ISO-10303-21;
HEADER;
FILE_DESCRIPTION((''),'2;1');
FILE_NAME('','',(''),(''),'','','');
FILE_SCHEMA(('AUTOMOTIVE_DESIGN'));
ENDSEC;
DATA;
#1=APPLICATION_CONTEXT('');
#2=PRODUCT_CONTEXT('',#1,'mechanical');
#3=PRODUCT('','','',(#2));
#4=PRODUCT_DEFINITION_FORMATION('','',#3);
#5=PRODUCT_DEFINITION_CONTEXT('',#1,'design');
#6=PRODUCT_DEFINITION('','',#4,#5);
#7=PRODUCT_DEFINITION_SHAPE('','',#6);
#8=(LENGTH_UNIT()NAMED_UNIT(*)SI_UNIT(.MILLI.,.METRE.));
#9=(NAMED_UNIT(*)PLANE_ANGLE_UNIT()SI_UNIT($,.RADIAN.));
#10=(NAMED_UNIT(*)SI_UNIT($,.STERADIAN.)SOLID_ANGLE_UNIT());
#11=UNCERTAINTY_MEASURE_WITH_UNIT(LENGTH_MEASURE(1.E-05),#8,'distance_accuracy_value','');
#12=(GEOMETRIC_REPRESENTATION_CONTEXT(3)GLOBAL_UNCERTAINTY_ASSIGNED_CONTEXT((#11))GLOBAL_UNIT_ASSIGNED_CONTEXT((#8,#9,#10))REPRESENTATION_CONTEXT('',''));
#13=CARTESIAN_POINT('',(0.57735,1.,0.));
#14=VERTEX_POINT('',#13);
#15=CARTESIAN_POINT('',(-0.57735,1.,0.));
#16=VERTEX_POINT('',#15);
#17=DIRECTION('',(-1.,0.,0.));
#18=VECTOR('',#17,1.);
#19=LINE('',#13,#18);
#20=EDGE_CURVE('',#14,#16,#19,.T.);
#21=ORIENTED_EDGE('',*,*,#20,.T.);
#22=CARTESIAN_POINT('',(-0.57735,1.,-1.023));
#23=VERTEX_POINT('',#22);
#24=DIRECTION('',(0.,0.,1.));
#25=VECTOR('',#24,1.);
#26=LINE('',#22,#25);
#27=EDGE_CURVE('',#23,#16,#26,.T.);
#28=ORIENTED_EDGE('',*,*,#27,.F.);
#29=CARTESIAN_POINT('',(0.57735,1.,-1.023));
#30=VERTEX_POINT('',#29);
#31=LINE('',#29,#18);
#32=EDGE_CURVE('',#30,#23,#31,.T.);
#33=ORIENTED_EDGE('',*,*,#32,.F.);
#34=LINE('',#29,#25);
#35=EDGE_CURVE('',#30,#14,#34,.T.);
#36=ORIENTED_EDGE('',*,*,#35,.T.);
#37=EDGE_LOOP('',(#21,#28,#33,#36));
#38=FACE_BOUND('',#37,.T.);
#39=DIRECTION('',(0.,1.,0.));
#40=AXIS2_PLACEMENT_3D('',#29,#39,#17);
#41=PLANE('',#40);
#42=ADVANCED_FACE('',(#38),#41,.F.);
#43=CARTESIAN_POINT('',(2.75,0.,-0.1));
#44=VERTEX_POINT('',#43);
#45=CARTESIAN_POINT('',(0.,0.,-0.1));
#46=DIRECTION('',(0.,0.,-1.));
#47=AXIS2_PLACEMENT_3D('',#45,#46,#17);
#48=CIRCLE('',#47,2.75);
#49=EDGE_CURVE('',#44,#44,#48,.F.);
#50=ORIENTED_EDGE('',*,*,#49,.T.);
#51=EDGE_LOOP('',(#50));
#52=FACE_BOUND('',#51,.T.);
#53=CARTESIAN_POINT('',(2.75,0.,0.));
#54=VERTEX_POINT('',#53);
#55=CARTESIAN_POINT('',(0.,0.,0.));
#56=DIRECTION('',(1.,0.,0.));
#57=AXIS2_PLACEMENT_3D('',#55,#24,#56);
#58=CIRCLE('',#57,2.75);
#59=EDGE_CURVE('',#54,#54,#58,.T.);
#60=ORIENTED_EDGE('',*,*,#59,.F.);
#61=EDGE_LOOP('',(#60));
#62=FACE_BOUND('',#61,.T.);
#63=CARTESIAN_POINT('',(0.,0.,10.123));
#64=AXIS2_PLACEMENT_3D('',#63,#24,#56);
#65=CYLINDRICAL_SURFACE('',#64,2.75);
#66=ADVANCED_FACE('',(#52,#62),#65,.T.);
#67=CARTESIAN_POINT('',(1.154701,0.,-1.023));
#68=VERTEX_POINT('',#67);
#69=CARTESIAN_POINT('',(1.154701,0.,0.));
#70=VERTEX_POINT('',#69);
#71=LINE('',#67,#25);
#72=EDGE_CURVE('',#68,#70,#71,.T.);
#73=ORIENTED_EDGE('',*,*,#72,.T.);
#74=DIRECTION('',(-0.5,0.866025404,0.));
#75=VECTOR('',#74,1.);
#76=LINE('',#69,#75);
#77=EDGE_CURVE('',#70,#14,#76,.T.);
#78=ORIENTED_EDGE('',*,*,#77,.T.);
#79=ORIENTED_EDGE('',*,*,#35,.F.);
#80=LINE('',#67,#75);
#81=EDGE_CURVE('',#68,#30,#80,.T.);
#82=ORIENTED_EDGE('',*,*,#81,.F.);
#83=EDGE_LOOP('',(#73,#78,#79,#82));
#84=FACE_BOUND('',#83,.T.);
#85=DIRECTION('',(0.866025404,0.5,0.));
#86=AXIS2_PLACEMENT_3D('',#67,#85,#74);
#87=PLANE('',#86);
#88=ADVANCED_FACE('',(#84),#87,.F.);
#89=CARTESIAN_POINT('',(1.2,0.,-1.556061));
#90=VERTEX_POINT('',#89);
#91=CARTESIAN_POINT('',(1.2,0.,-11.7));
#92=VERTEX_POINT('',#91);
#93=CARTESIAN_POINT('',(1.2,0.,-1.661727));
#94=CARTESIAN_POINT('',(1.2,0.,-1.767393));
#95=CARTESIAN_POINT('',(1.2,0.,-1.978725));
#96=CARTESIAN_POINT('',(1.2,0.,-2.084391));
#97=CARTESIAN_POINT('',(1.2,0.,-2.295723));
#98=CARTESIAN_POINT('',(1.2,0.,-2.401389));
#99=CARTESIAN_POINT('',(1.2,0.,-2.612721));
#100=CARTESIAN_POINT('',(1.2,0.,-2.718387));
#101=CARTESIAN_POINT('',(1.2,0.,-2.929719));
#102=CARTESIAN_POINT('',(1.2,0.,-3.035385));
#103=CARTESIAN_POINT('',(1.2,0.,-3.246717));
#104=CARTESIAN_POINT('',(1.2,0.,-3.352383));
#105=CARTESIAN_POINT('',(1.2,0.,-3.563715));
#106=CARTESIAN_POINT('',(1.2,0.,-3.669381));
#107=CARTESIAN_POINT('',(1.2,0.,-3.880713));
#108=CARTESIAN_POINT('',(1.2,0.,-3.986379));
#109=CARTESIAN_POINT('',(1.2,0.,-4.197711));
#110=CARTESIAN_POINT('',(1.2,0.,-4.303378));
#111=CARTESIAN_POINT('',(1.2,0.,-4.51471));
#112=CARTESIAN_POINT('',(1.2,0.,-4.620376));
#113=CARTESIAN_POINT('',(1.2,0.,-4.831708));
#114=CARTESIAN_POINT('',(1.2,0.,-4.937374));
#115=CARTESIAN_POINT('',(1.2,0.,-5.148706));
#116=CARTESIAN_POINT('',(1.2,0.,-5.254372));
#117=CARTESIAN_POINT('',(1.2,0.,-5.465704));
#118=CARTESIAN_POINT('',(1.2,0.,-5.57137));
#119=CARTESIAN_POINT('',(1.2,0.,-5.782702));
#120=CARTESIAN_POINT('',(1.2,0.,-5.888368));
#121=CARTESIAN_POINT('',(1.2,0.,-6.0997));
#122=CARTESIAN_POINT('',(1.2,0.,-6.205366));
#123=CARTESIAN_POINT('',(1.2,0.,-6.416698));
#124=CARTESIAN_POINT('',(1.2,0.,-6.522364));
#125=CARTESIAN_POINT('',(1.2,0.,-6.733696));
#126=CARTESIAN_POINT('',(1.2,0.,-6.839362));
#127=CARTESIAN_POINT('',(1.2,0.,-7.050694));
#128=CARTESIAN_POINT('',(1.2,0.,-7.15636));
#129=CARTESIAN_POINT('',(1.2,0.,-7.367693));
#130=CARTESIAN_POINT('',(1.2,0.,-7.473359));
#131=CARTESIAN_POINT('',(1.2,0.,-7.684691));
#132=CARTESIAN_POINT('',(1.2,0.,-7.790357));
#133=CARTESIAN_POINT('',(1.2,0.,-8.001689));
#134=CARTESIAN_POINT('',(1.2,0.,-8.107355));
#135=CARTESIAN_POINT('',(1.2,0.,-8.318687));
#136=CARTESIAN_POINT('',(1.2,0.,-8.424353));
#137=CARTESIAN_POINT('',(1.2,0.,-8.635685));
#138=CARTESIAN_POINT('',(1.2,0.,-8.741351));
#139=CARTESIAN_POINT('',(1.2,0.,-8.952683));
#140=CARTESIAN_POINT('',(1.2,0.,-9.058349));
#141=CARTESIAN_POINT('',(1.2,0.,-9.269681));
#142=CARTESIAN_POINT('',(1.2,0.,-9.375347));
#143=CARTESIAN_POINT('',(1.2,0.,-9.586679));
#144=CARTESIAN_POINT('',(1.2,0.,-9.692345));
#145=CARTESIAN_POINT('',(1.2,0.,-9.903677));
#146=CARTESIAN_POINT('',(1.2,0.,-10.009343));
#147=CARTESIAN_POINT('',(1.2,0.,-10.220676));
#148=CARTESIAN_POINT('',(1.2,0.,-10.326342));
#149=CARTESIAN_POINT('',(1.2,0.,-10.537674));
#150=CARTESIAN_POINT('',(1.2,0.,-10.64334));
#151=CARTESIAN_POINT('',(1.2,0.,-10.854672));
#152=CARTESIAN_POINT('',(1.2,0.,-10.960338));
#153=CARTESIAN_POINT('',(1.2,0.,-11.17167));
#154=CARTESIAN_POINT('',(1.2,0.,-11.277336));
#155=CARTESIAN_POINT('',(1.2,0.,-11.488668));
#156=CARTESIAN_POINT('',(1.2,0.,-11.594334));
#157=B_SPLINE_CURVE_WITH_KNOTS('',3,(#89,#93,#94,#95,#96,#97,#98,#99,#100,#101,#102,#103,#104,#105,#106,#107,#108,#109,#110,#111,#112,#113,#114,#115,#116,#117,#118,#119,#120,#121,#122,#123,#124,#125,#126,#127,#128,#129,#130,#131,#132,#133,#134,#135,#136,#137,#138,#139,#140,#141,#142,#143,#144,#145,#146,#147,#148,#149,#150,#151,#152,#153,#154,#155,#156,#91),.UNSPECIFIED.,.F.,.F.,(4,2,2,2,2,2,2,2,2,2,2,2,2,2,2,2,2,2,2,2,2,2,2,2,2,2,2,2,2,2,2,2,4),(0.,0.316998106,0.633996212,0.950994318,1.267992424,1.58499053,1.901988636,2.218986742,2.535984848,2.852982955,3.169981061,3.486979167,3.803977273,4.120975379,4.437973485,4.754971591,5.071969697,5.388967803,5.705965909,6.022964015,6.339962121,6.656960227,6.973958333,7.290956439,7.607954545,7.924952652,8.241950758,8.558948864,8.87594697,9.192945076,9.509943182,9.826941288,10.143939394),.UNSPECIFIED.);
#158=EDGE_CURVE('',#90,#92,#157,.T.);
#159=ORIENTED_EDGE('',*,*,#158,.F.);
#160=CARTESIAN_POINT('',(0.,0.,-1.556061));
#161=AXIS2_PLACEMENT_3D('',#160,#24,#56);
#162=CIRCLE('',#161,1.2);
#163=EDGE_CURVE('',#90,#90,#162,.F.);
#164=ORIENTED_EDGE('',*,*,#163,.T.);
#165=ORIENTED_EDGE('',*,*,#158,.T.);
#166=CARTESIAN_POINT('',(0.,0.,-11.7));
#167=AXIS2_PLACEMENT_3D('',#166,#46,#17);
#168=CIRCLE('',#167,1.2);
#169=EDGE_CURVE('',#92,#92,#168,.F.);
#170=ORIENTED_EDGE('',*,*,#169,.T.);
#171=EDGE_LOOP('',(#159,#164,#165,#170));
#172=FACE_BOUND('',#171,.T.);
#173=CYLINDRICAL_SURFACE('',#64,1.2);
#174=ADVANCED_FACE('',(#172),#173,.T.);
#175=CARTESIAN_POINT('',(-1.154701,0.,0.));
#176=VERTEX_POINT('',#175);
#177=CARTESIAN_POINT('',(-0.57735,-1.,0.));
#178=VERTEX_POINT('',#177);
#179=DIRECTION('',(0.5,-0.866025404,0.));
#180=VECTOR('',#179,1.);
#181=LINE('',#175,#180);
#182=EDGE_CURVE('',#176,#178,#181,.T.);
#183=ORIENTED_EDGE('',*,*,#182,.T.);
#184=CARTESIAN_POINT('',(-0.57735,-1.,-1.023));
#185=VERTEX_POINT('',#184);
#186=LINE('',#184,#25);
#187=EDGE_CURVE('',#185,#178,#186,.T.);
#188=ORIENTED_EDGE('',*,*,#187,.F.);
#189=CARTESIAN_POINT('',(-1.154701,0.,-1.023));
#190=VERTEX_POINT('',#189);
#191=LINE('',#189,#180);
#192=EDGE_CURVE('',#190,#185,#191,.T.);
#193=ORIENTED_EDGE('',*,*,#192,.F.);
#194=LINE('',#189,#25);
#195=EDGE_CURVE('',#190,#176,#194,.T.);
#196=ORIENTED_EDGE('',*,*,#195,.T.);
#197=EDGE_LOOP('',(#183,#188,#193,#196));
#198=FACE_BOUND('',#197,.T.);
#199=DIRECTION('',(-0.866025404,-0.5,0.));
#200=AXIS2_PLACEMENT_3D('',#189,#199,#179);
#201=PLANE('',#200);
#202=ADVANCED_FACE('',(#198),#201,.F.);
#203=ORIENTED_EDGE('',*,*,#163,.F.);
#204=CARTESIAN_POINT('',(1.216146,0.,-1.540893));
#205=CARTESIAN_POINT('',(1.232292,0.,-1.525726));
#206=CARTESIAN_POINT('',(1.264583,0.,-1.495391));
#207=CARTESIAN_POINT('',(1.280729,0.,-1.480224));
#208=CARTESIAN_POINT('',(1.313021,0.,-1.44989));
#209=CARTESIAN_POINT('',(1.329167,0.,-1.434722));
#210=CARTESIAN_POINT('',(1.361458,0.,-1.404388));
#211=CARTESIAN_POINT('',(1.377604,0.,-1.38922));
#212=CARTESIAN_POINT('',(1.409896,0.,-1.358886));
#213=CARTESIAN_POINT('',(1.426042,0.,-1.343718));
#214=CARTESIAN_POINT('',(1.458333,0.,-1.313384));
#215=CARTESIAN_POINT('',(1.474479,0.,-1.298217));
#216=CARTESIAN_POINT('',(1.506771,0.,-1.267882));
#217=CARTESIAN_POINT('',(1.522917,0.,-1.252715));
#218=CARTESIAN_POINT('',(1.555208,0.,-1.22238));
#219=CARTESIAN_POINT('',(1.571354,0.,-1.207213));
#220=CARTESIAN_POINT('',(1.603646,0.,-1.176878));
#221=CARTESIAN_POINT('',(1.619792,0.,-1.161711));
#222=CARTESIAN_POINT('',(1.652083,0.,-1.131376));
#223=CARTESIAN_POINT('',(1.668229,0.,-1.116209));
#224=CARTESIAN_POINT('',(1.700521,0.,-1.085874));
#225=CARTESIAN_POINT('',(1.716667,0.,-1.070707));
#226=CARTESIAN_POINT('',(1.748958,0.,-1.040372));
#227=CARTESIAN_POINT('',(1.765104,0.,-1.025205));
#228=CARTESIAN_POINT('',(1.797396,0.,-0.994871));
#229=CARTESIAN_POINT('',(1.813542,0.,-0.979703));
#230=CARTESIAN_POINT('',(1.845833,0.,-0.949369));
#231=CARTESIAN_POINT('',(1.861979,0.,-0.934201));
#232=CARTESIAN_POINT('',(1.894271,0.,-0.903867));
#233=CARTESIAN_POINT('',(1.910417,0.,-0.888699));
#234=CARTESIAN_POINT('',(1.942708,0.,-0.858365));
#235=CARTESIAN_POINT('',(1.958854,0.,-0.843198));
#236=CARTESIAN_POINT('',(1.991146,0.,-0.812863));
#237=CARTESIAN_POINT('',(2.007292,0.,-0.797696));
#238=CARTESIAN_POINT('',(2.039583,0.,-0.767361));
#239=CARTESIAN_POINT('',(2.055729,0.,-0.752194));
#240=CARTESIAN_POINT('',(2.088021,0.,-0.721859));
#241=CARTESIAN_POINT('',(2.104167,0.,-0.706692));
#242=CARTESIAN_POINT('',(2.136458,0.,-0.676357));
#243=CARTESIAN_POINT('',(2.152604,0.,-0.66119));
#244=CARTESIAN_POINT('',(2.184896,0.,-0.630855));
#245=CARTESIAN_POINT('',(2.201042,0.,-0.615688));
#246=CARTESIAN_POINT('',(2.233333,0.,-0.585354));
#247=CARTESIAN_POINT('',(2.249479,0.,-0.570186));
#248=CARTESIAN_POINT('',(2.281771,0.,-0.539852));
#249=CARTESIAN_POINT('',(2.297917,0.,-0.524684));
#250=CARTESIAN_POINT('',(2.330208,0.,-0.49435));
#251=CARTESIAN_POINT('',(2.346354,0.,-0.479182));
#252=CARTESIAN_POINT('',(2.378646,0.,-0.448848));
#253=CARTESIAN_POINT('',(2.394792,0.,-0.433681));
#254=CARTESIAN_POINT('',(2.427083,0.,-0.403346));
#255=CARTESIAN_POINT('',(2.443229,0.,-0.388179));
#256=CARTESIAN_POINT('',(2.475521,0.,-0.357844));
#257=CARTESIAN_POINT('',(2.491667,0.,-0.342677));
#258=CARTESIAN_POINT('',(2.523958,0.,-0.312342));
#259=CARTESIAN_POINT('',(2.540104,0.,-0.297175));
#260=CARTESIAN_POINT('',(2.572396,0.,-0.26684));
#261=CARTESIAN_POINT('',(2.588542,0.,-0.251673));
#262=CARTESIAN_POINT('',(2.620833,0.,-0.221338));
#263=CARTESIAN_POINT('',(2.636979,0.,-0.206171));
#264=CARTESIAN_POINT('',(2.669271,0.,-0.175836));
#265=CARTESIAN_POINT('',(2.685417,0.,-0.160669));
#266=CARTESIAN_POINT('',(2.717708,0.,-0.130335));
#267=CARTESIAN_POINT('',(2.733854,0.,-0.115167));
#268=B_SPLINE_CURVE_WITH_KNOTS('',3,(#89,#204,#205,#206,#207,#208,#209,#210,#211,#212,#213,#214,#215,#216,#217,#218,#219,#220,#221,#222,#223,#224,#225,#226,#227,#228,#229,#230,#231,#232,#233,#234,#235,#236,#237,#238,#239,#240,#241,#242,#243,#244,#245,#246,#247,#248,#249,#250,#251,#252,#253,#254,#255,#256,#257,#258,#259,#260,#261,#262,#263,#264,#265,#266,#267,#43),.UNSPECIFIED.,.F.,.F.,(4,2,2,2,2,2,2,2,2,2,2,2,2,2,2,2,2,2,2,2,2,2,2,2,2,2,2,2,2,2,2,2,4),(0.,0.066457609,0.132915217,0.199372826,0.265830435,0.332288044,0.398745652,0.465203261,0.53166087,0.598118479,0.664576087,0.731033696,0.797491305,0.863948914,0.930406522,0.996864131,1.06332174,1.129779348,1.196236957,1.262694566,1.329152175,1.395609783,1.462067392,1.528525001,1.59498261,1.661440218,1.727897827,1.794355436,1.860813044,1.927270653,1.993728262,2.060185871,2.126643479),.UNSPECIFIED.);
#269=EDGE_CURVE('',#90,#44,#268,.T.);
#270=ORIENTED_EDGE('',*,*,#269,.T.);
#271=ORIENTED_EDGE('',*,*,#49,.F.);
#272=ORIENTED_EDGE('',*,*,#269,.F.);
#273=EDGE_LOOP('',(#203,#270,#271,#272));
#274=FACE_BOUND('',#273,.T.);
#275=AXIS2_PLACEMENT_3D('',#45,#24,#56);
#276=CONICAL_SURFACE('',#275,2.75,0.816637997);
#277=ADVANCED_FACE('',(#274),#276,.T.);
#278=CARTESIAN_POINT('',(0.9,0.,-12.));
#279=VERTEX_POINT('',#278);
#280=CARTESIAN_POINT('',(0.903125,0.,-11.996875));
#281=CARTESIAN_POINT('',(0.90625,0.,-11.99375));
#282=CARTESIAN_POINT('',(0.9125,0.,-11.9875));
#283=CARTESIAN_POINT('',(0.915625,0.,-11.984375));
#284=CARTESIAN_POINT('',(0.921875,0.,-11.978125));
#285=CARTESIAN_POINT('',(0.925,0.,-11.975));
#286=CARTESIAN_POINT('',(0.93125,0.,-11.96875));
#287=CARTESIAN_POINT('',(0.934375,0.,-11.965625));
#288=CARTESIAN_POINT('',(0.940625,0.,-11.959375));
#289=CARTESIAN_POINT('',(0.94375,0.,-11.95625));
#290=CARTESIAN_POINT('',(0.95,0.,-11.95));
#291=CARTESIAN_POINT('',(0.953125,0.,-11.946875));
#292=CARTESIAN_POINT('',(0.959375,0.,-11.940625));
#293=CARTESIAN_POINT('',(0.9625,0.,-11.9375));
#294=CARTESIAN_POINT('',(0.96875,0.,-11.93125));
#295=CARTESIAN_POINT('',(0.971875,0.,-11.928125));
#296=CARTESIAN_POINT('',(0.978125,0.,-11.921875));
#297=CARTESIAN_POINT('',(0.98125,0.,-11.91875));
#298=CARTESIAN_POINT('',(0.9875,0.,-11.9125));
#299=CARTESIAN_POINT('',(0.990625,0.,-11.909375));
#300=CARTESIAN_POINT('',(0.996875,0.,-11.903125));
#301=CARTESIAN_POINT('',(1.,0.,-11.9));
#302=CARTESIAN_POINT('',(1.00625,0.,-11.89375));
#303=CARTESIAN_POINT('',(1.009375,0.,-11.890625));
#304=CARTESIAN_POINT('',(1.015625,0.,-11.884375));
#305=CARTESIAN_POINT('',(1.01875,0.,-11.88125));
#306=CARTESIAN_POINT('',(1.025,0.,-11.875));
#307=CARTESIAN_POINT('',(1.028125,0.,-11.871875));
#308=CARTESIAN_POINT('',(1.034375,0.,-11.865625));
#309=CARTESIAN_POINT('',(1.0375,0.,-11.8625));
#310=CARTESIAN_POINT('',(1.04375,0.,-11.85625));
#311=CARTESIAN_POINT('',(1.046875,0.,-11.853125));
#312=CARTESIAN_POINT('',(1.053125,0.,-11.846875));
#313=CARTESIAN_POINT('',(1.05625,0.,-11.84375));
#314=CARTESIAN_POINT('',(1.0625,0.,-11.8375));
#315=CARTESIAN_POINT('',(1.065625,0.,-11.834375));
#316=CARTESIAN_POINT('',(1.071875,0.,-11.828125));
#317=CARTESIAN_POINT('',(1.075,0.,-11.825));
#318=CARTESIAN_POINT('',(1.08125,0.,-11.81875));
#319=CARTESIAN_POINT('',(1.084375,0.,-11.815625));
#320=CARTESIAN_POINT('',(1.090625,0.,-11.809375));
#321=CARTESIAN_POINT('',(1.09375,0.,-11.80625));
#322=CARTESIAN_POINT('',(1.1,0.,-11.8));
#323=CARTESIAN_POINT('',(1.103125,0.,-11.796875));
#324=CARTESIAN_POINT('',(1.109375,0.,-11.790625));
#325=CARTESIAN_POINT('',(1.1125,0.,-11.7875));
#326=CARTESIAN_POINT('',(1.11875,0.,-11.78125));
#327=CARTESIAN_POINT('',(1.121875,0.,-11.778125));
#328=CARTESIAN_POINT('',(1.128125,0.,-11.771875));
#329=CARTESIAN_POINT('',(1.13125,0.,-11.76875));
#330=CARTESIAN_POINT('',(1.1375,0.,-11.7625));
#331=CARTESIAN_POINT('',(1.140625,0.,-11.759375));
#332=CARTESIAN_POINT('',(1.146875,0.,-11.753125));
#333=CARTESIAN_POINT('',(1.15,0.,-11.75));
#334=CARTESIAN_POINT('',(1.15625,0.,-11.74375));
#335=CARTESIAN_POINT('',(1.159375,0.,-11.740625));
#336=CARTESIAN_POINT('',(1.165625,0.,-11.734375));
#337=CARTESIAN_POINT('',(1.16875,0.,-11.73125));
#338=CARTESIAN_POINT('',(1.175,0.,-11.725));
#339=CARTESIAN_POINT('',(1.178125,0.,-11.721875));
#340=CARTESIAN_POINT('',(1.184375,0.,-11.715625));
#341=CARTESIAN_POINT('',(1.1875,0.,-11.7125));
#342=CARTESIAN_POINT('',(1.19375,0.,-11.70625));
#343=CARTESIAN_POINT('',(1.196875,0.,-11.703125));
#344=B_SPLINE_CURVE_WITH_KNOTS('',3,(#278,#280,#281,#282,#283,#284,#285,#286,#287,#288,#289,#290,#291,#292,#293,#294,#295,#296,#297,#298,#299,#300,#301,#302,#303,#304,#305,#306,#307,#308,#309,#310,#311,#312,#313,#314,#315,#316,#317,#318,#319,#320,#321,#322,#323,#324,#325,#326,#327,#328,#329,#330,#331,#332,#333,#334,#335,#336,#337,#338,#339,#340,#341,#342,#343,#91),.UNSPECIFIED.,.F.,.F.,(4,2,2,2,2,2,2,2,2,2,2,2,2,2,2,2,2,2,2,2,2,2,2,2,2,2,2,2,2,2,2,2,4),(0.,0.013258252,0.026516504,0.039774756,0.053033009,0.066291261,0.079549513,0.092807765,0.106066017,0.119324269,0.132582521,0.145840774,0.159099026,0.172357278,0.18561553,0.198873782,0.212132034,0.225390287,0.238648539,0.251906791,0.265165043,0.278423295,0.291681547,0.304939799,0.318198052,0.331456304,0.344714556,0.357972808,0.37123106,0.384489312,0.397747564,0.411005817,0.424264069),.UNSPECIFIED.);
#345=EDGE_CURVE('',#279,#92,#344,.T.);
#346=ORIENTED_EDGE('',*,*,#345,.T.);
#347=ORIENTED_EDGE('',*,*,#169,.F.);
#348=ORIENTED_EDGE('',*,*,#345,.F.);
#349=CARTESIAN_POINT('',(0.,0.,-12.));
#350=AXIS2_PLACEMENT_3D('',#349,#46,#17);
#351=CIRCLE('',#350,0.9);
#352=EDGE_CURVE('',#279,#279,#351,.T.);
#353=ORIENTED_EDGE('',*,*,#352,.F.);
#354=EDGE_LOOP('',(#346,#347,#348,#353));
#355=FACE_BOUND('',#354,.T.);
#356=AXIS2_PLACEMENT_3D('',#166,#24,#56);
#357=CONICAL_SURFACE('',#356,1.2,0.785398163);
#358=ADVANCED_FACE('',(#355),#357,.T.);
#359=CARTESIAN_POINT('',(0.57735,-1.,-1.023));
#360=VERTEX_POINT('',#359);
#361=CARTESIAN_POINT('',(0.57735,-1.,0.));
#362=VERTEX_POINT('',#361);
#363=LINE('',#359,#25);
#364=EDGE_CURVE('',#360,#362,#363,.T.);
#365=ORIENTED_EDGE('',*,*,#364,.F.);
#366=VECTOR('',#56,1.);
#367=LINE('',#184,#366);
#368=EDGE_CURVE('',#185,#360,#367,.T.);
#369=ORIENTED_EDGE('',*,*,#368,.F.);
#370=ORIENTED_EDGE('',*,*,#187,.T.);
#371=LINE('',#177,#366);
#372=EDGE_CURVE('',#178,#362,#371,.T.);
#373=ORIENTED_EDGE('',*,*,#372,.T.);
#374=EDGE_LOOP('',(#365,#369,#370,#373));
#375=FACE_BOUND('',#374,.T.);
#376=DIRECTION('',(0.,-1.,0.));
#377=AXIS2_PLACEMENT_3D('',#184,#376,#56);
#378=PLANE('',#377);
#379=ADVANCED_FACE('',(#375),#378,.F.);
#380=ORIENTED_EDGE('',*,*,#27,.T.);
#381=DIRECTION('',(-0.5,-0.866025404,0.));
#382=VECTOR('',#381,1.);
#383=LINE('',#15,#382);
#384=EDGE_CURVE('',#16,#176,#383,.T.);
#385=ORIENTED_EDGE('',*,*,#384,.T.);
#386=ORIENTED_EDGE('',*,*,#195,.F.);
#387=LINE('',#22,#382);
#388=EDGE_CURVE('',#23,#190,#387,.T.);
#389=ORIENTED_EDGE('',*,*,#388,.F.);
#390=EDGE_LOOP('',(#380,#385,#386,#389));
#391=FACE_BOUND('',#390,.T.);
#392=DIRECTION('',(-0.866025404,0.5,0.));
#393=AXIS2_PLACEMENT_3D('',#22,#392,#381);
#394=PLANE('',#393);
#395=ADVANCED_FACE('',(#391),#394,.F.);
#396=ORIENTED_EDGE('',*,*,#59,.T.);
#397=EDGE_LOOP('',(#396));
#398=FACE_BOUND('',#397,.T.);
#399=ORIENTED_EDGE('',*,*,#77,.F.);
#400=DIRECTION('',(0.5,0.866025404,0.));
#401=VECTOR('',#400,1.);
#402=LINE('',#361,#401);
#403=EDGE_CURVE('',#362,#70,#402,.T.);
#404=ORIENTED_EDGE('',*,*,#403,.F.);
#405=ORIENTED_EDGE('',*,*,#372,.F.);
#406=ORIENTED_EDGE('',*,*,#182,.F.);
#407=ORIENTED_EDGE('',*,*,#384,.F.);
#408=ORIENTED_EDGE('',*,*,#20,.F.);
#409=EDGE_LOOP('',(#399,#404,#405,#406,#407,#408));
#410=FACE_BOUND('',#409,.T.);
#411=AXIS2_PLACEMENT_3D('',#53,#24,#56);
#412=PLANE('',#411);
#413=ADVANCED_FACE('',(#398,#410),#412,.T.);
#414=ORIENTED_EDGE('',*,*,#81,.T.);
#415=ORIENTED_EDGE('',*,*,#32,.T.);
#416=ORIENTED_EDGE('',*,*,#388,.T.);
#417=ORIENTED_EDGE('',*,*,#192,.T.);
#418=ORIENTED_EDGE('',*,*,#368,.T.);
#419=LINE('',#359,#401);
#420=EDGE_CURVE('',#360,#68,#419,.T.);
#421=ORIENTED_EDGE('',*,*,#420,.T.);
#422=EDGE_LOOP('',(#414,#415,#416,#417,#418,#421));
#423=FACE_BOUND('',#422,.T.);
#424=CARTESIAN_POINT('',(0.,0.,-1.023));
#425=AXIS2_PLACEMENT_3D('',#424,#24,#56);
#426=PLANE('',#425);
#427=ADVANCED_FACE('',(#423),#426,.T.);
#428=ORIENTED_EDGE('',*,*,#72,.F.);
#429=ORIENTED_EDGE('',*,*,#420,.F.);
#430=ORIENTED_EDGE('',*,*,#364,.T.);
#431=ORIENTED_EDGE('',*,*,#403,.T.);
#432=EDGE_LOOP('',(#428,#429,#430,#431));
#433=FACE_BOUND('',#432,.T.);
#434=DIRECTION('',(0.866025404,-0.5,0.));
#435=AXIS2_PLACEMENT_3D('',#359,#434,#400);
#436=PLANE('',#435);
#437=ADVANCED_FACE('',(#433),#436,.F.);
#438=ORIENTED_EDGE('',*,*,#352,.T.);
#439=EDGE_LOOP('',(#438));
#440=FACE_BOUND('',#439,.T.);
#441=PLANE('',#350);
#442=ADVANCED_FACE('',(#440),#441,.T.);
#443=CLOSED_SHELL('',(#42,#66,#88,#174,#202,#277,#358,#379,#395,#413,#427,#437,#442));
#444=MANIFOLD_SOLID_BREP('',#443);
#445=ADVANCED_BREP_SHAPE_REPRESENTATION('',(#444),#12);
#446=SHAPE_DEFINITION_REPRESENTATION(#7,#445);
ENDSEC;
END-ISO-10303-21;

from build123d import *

# Parameters (mm, degrees)
SHANK_TIP_CHAMFER_SIZE          = 0.3
COUNTERSUNK_HEAD_CHAMFER_SIZE   = 1.65
COUNTERSUNK_HEAD_CHAMFER_SIZE_2 = 1.55
HEX_DRIVE_CUT_DEPTH             = 1.023


with BuildPart() as part:
    # Screw Section → Screw Blank Revolve (revolve)
    with BuildSketch(Plane(origin=(0, 0, 0), x_dir=(1, 0, 0), z_dir=(0, 1, 0))):
        Polygon((0, 12), (1.2, 12), (1.2, 1.65), (2.75, 1.65), (2.75, 0), (0, 0), align=None)
    revolve(axis=Axis((0, 0, 10.123), (0, 0, -1)))

    # Shank Tip Chamfer
    shank_tip_chamfer_edges = [part.edges().sort_by_distance(p)[0] for p in [
        (-1.2, 0, -12),
    ]]
    chamfer(shank_tip_chamfer_edges, length=SHANK_TIP_CHAMFER_SIZE)

    # Countersunk Head Chamfer
    # the kernel refuses this chamfer: 1.65, 1.55 mm, written as the material it takes off along each edge
    with BuildSketch(Plane(origin=(0, 0, -1.65), x_dir=(1, 0, 0), z_dir=(0, 1, 0))) as countersunk_head_chamfer_piece_1_section:
        Polygon((2.75 - COUNTERSUNK_HEAD_CHAMFER_SIZE, 0), (2.75, -COUNTERSUNK_HEAD_CHAMFER_SIZE_2), (2.75, 0), align=None)
    countersunk_head_chamfer_piece_1 = revolve(axis=Axis((0, 0, -1.65), (0, 0, -1)), mode=Mode.PRIVATE)
    countersunk_head_chamfer_piece_1 = countersunk_head_chamfer_piece_1 - Plane(origin=(0, 0, -0.825037094), x_dir=(1, 0, 0), z_dir=(0, 0, 1)) * Cylinder(1.2, 11, mode=Mode.PRIVATE)
    add(countersunk_head_chamfer_piece_1, mode=Mode.SUBTRACT)

    # Hex Drive Sketch → Hex Drive Cut (cut)
    with BuildSketch(Plane.XY):
        Polygon((1.154700538, 0), (0.577350269, 1), (-0.577350269, 1), (-1.154700538, 0), (-0.577350269, -1), (0.577350269, -1), align=None)
    extrude(amount=-HEX_DRIVE_CUT_DEPTH, mode=Mode.SUBTRACT)


solid = part.part
